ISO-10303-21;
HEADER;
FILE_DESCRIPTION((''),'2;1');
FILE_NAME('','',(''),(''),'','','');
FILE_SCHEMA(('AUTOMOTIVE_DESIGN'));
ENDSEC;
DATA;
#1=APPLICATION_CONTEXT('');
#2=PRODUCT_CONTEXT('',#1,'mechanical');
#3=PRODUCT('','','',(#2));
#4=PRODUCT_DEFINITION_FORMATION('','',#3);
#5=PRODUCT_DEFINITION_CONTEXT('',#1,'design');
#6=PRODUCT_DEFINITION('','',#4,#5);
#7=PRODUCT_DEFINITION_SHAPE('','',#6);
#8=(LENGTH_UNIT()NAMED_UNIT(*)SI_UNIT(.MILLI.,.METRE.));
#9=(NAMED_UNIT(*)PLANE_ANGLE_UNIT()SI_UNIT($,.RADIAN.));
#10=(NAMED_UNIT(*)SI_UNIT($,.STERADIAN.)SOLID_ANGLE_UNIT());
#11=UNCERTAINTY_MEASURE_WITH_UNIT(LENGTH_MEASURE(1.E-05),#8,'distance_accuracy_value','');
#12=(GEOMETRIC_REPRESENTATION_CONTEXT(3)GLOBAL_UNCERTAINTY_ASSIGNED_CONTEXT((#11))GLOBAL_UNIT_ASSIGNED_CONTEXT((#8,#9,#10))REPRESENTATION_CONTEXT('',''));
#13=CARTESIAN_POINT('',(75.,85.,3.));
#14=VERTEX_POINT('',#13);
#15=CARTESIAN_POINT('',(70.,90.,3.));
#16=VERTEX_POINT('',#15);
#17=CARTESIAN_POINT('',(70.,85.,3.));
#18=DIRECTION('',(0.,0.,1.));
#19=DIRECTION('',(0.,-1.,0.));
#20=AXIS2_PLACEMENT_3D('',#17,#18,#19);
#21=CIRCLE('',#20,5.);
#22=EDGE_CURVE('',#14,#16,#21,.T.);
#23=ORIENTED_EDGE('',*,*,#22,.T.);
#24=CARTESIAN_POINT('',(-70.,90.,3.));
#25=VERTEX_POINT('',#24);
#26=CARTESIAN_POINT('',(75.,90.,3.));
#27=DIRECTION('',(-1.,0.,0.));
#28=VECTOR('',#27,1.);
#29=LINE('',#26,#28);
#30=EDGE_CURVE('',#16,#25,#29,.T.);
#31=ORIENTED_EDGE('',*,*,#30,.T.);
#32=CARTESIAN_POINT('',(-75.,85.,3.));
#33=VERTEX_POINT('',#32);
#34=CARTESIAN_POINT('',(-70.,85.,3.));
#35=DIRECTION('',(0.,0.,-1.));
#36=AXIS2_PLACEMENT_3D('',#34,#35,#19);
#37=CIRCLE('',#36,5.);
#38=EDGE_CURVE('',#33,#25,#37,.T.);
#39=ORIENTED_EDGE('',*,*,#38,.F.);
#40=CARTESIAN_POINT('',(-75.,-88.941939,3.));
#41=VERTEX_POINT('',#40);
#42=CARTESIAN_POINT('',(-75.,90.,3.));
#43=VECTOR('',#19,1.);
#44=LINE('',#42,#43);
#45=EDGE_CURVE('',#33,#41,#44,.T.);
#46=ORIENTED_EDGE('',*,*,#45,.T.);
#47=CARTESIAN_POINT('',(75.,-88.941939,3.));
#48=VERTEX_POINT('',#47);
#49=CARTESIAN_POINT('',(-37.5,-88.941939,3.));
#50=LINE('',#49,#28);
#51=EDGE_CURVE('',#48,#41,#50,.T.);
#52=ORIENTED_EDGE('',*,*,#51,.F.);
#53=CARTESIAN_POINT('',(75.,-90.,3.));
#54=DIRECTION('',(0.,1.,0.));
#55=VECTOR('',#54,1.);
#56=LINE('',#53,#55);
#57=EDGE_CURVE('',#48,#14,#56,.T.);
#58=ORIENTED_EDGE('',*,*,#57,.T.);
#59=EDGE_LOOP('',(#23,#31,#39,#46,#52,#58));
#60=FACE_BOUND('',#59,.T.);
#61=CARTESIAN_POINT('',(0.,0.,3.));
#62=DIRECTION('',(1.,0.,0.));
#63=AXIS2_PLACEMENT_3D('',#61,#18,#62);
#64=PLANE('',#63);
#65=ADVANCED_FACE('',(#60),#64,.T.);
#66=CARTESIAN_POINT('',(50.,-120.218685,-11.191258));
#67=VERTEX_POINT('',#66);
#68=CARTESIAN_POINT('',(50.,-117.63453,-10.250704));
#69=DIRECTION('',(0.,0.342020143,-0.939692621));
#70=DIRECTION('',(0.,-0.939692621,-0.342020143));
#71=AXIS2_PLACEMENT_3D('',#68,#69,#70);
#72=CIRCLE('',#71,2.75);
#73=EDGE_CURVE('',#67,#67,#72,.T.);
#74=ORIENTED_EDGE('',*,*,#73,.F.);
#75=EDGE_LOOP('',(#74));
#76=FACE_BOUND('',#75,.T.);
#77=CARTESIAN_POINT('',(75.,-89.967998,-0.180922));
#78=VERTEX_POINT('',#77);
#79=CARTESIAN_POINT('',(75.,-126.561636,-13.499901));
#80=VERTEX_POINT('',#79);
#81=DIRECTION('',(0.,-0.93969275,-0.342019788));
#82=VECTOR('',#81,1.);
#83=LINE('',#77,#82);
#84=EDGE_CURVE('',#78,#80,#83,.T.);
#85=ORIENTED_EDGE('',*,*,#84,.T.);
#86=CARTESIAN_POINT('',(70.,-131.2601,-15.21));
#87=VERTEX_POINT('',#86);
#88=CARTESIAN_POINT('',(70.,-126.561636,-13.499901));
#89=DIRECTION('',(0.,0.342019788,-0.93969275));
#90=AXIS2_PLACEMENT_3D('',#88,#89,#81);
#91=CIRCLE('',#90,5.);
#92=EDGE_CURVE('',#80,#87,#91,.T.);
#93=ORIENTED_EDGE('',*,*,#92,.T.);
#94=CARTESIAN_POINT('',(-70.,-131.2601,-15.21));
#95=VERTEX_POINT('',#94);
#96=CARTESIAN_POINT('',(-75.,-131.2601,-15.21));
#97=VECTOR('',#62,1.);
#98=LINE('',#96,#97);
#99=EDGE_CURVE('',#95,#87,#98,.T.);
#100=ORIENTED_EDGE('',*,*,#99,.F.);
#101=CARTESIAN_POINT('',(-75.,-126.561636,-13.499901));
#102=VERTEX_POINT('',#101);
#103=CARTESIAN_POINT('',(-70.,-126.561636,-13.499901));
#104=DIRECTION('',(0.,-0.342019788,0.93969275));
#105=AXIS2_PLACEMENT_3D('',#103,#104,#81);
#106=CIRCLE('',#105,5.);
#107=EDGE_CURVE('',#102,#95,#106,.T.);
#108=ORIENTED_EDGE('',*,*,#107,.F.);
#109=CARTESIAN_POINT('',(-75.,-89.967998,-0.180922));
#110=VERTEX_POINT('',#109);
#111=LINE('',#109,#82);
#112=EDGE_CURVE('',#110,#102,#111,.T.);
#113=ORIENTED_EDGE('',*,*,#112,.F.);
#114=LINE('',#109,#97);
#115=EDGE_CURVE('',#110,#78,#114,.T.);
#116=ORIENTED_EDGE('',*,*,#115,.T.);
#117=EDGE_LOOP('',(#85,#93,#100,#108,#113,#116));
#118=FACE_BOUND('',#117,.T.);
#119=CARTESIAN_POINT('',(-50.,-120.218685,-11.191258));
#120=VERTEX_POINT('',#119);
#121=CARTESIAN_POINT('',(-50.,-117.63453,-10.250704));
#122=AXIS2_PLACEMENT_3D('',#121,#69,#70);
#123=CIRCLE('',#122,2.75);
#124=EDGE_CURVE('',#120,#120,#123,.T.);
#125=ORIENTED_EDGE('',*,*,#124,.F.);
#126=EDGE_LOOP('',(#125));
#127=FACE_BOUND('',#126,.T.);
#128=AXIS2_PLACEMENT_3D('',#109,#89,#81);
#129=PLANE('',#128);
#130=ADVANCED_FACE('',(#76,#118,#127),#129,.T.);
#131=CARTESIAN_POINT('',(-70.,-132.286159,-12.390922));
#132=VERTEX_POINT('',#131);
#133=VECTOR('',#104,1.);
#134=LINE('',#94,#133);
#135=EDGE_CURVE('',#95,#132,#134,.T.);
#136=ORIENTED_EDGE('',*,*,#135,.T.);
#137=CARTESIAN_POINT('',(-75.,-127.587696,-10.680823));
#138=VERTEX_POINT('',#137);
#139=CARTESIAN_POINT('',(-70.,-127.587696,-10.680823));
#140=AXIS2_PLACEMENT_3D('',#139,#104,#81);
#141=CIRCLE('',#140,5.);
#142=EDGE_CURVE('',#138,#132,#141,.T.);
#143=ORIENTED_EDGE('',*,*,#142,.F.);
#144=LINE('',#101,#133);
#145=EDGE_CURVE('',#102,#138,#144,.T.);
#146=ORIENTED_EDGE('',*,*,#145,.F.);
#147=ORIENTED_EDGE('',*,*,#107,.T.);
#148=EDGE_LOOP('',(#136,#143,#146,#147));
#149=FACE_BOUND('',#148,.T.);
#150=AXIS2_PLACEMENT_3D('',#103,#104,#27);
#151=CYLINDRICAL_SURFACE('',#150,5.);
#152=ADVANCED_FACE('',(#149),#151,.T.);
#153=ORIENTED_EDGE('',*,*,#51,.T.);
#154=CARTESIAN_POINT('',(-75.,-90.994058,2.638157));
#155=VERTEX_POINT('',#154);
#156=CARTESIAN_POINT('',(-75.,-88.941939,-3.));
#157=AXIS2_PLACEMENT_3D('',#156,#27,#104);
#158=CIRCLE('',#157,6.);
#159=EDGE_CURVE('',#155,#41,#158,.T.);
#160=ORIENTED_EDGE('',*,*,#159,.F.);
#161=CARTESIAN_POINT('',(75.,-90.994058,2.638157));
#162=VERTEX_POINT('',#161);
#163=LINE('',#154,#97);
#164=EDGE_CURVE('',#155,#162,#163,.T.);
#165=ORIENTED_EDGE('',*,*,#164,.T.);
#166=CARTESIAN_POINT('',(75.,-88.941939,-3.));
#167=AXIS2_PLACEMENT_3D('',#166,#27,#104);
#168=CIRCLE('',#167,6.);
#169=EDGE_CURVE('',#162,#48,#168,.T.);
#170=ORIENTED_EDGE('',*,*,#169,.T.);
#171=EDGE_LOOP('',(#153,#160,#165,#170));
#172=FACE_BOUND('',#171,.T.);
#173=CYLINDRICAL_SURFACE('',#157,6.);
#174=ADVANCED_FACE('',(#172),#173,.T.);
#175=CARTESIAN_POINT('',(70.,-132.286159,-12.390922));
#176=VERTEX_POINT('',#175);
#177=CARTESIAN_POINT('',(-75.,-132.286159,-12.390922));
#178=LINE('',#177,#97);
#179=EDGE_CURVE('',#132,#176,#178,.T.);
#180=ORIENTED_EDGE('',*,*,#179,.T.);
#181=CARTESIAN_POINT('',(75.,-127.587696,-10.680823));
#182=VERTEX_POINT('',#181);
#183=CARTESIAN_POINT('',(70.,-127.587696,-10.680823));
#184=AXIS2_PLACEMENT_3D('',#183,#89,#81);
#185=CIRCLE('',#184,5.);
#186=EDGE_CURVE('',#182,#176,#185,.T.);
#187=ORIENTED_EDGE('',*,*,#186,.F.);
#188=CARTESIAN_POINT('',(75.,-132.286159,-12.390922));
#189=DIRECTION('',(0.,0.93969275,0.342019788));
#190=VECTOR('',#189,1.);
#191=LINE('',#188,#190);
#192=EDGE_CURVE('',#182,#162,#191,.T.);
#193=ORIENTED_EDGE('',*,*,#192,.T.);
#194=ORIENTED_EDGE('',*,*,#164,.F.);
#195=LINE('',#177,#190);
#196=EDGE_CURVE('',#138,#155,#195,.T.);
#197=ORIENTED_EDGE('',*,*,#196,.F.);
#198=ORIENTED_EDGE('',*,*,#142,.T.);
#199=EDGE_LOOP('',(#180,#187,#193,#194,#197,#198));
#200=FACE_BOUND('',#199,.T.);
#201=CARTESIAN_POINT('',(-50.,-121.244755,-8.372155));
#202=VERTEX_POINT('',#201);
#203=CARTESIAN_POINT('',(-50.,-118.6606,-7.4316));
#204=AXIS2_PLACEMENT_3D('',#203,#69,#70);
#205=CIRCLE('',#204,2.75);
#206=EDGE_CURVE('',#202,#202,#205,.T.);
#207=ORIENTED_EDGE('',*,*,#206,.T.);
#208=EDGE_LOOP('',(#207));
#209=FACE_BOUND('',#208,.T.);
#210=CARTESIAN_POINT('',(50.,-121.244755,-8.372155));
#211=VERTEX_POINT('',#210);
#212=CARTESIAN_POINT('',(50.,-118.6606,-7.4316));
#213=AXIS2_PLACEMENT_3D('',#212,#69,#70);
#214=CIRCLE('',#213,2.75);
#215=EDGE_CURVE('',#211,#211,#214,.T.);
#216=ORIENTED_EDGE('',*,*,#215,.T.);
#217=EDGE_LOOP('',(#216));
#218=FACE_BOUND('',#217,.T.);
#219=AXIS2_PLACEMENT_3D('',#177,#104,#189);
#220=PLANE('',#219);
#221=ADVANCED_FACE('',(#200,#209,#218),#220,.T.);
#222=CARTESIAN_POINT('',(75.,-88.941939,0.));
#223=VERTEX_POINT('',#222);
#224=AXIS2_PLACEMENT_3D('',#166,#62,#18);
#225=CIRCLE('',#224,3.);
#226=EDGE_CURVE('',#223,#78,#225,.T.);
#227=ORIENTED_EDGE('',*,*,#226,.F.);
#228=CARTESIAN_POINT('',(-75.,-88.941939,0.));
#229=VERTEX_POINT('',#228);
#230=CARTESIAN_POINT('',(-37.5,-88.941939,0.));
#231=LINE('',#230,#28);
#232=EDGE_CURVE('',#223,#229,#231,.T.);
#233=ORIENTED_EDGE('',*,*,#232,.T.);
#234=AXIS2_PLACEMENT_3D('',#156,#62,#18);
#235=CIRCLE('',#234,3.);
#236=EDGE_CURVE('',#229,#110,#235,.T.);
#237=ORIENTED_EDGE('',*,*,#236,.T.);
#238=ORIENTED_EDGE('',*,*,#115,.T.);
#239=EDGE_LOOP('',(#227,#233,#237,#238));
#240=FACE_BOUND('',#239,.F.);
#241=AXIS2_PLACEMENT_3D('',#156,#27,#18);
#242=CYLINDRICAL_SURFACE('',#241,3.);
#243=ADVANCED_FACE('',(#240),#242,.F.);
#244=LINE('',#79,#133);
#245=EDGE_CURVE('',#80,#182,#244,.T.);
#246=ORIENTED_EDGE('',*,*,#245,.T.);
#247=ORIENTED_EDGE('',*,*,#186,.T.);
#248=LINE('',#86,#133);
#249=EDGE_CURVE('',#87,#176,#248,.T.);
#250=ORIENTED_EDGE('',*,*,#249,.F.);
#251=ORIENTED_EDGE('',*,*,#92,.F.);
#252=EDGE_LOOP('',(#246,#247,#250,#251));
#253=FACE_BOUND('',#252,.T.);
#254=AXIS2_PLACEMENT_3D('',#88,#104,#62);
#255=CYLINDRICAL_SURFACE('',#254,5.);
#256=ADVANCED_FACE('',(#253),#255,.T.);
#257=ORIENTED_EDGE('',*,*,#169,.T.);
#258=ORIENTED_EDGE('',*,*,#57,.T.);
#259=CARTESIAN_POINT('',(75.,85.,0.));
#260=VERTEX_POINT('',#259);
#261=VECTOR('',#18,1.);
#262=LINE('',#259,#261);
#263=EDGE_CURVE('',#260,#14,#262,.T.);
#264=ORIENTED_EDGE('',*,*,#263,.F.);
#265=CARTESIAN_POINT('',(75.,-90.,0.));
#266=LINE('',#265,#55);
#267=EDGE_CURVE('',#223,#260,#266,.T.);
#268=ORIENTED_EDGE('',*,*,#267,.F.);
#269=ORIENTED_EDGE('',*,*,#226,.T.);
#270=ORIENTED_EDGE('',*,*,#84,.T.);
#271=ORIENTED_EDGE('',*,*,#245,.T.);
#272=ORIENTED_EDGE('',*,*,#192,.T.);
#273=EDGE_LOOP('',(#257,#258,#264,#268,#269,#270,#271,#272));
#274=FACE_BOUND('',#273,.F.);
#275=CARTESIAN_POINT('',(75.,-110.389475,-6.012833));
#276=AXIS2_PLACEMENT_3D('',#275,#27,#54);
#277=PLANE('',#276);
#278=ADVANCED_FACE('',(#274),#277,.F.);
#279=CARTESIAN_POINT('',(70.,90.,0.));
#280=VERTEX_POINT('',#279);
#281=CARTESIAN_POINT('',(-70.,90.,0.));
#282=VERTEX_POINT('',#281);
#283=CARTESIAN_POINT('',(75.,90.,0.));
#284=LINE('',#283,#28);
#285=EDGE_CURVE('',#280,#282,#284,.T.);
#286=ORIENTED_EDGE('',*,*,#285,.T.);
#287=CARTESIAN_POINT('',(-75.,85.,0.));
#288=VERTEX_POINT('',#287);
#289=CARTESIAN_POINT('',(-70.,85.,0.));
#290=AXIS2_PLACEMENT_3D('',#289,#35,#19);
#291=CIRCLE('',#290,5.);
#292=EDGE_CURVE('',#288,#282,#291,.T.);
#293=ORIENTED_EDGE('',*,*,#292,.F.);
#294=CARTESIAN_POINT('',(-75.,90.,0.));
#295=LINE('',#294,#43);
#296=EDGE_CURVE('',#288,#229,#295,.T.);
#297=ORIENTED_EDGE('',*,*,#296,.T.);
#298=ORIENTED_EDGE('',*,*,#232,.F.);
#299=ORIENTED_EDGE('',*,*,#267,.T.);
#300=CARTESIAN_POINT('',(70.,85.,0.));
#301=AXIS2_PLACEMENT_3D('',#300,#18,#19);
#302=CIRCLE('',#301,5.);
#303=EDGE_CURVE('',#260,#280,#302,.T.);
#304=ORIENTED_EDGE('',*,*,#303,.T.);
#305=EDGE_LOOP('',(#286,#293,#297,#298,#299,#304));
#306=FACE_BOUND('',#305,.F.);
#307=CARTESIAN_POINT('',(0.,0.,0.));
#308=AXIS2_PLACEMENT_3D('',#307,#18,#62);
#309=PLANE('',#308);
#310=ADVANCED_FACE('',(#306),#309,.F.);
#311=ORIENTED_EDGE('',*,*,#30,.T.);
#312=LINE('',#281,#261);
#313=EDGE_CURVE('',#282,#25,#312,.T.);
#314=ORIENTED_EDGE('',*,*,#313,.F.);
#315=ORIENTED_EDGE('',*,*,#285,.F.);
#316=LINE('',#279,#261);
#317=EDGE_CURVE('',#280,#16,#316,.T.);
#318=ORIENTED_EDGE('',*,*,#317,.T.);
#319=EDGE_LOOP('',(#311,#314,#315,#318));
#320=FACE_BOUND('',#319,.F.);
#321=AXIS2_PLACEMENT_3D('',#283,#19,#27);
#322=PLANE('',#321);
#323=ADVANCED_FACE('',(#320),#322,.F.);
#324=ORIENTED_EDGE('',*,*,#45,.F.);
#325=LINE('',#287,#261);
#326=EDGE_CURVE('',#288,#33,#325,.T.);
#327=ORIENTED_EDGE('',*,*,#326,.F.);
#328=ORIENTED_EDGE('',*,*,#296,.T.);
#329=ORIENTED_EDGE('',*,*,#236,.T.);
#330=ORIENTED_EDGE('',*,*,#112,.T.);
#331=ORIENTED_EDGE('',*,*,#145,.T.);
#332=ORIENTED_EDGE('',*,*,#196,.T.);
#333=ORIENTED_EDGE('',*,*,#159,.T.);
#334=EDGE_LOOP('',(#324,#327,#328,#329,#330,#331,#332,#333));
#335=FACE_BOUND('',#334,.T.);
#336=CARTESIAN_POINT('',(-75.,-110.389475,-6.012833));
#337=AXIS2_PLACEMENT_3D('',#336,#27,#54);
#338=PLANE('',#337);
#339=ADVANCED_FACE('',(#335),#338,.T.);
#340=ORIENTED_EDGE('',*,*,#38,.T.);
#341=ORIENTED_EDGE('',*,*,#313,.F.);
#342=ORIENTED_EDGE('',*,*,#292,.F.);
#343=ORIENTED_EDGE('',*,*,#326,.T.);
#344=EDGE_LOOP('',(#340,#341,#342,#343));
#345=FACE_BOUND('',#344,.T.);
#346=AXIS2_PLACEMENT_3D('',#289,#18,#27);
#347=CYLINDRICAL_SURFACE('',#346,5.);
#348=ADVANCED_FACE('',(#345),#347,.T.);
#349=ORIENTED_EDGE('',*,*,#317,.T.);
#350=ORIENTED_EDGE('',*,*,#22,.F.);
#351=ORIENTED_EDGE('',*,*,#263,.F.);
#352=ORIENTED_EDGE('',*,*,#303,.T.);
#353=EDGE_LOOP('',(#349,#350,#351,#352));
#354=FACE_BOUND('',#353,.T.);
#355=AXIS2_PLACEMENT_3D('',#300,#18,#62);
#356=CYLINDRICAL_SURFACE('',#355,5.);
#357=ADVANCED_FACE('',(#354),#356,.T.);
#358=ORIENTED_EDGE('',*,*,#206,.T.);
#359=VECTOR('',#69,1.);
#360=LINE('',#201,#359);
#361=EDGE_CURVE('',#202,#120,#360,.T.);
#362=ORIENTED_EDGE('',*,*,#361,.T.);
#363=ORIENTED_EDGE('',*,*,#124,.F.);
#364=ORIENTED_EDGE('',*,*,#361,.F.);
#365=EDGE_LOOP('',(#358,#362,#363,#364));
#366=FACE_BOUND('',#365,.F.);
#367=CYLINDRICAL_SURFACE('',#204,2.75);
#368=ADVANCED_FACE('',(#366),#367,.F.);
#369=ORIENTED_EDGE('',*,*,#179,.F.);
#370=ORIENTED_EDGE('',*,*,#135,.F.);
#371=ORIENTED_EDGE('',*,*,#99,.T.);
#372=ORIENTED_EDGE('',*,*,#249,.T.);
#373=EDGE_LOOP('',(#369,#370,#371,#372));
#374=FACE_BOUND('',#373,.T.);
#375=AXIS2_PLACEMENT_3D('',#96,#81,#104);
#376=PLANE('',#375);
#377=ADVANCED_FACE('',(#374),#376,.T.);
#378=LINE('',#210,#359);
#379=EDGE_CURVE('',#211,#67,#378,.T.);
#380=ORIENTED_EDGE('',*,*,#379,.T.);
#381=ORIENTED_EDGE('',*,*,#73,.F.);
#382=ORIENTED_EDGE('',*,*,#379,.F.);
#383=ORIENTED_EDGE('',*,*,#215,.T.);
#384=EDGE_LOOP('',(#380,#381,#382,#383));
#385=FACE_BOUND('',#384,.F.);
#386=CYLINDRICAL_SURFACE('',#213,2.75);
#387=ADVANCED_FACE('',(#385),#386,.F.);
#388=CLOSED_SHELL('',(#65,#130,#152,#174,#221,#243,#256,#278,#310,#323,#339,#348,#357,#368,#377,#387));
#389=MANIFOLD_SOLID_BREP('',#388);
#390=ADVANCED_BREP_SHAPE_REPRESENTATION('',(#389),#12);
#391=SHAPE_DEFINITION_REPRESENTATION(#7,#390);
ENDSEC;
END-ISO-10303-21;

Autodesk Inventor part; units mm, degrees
ref_plane "YZ Plane" through (0, 0, 0) normal (1, 0, 0) x (0, 1, 0)
ref_plane "XZ Plane" through (0, 0, 0) normal (0, 1, 0) x (-1, 0, 0)
ref_plane "XY Plane" through (0, 0, 0) normal (0, 0, 1) x (1, 0, 0)
sketch "Sketch3" plane through (0, 0, 0) normal (0, 0, 1) x (1, 0, 0)
  line L0 (-75, -90) -> (75, -90)
  line L1 (75, -90) -> (75, 90)
  line L2 (75, 90) -> (-75, 90)
  line L3 (-75, 90) -> (-75, -90)
  line L4 (-75, -90) -> (75, 90) construction
  line L5 (75, -90) -> (-75, 90) construction
  point P0 (0, 0)
  dimension "d11" = 150
  dimension "d12" = 180
extrude "Plate3" add sketch "Sketch3" along normal blind 3
sketch "Sketch4" plane through (-75, -88.9739, 0.1809) normal (0, -0.3420201, 0.9396926) x (1, 0, 0)
  line L0 (150, 0) -> (0, 0)
  line L1 (0, 0) -> (0, -45)
  line L2 (0, -45) -> (150, -45)
  line L3 (150, -45) -> (150, 0)
edge flange "Flange2" height 45 angle 20 thickness 3 bend radius 3 thickness toward (0, -0.3420201, 0.9396926) relief tear relief width 3 relief depth 1.5 edges at (0, -90, 0) wall of the first edge with corners at (75, -88.9739, 0.1809) (-75, -88.9739, 0.1809) (-75, -131.2601, -15.21) (75, -131.2601, -15.21)
bend "Bend2"
corner "Corner2"
fillet "Fillet1" radius 5 4 edges at (75, 90, 1.5) (-75, 90, 1.5) (-75, -131.7731, -13.8004) (75, -131.7731, -13.8004)
sketch "Sketch6" plane through (0, 0, 3) normal (0, 0, 1) x (1, 0, 0)
  line L0 (-67.272, 87) -> (67.272, 87) construction
  line L1 (67.272, 87) -> (67.272, -48) construction
  line L2 (67.272, -48) -> (-67.272, -48) construction
  line L3 (-67.272, -48) -> (-67.272, 87) construction
  line L4 (-75, -88.942) -> (75, -88.942) projected
  line L5 (-70, 90) -> (70, 90) projected
  point P0 (0, 0)
  point P1 (0, 87)
  point P2 (0, 90)
  dimension "d50" = 178.942
  dimension "d51" = 140
  dimension "d52" = 135
  dimension "d53" = 3
decal "Decal2"
sketch "Sketch7" plane through (-75, -90.9942, 2.6382) normal (0, -0.3420201, 0.9396926) x (1, 0, 0)
  line L0 (150, 0) -> (150, -38.942) projected
  line L1 (0, -38.942) -> (0, 0) projected
  line L2 (145, -43.942) -> (5, -43.942) projected
  point P0 (75, 84.6042)
  point P1 (25, -29.442)
  point P2 (125, -29.442)
  dimension "d62" = 100
  dimension "d63" = 150
  dimension "d64" = 25
  dimension "d65" = 14.5
hole "Hole1" at (-50, -118.6606, -7.4316) at (50, -118.6606, -7.4316) direction (0, 0.3420201, -0.9396926) diameter 5.5 end through all clearance for "Countersunk Flat Head Screw DIN EN ISO 2009" size "M5" standard "DIN"
equation "\"d71\" = Grubosc"
equation "\"d13\" = Grubosc"
equation "\"d14\" = SzerokośćGięciaPodcięcia"
equation "\"d15\" = GłębokośćGięciaPodcięcia"
equation "\"d16\" = MinimalnaPozostałość"
equation "\"d17\" = PromieńPrzejścia"
equation "\"d20\" = PromieńGięcia"
equation "\"d21\" = RozmiarPodcięciaNarożnika"
equation "\"d22\" = Wielk_odstępu"
equation "\"d23\" = Rozmiar_promienia_Jacobiego"
equation "\"PromieńGięcia\" = Grubosc"
equation "\"SzerokośćGięciaPodcięcia\" = Grubosc"
equation "\"GłębokośćGięciaPodcięcia\" = 0.5 * Grubosc"
equation "\"RozmiarPodcięciaNarożnika\" = 4 * Grubosc"
equation "\"MinimalnaPozostałość\" = 2 * Grubosc"
equation "\"PromieńPrzejścia\" = PromieńGięcia"
equation "\"Rozmiar_promienia_Jacobiego\" = PromieńGięcia"
equation "\"Wielk_odstępu\" = Grubosc"
equation "\"Grubosc\" = 3"
properties part number "fin" material "S235JR(1.0038)"
